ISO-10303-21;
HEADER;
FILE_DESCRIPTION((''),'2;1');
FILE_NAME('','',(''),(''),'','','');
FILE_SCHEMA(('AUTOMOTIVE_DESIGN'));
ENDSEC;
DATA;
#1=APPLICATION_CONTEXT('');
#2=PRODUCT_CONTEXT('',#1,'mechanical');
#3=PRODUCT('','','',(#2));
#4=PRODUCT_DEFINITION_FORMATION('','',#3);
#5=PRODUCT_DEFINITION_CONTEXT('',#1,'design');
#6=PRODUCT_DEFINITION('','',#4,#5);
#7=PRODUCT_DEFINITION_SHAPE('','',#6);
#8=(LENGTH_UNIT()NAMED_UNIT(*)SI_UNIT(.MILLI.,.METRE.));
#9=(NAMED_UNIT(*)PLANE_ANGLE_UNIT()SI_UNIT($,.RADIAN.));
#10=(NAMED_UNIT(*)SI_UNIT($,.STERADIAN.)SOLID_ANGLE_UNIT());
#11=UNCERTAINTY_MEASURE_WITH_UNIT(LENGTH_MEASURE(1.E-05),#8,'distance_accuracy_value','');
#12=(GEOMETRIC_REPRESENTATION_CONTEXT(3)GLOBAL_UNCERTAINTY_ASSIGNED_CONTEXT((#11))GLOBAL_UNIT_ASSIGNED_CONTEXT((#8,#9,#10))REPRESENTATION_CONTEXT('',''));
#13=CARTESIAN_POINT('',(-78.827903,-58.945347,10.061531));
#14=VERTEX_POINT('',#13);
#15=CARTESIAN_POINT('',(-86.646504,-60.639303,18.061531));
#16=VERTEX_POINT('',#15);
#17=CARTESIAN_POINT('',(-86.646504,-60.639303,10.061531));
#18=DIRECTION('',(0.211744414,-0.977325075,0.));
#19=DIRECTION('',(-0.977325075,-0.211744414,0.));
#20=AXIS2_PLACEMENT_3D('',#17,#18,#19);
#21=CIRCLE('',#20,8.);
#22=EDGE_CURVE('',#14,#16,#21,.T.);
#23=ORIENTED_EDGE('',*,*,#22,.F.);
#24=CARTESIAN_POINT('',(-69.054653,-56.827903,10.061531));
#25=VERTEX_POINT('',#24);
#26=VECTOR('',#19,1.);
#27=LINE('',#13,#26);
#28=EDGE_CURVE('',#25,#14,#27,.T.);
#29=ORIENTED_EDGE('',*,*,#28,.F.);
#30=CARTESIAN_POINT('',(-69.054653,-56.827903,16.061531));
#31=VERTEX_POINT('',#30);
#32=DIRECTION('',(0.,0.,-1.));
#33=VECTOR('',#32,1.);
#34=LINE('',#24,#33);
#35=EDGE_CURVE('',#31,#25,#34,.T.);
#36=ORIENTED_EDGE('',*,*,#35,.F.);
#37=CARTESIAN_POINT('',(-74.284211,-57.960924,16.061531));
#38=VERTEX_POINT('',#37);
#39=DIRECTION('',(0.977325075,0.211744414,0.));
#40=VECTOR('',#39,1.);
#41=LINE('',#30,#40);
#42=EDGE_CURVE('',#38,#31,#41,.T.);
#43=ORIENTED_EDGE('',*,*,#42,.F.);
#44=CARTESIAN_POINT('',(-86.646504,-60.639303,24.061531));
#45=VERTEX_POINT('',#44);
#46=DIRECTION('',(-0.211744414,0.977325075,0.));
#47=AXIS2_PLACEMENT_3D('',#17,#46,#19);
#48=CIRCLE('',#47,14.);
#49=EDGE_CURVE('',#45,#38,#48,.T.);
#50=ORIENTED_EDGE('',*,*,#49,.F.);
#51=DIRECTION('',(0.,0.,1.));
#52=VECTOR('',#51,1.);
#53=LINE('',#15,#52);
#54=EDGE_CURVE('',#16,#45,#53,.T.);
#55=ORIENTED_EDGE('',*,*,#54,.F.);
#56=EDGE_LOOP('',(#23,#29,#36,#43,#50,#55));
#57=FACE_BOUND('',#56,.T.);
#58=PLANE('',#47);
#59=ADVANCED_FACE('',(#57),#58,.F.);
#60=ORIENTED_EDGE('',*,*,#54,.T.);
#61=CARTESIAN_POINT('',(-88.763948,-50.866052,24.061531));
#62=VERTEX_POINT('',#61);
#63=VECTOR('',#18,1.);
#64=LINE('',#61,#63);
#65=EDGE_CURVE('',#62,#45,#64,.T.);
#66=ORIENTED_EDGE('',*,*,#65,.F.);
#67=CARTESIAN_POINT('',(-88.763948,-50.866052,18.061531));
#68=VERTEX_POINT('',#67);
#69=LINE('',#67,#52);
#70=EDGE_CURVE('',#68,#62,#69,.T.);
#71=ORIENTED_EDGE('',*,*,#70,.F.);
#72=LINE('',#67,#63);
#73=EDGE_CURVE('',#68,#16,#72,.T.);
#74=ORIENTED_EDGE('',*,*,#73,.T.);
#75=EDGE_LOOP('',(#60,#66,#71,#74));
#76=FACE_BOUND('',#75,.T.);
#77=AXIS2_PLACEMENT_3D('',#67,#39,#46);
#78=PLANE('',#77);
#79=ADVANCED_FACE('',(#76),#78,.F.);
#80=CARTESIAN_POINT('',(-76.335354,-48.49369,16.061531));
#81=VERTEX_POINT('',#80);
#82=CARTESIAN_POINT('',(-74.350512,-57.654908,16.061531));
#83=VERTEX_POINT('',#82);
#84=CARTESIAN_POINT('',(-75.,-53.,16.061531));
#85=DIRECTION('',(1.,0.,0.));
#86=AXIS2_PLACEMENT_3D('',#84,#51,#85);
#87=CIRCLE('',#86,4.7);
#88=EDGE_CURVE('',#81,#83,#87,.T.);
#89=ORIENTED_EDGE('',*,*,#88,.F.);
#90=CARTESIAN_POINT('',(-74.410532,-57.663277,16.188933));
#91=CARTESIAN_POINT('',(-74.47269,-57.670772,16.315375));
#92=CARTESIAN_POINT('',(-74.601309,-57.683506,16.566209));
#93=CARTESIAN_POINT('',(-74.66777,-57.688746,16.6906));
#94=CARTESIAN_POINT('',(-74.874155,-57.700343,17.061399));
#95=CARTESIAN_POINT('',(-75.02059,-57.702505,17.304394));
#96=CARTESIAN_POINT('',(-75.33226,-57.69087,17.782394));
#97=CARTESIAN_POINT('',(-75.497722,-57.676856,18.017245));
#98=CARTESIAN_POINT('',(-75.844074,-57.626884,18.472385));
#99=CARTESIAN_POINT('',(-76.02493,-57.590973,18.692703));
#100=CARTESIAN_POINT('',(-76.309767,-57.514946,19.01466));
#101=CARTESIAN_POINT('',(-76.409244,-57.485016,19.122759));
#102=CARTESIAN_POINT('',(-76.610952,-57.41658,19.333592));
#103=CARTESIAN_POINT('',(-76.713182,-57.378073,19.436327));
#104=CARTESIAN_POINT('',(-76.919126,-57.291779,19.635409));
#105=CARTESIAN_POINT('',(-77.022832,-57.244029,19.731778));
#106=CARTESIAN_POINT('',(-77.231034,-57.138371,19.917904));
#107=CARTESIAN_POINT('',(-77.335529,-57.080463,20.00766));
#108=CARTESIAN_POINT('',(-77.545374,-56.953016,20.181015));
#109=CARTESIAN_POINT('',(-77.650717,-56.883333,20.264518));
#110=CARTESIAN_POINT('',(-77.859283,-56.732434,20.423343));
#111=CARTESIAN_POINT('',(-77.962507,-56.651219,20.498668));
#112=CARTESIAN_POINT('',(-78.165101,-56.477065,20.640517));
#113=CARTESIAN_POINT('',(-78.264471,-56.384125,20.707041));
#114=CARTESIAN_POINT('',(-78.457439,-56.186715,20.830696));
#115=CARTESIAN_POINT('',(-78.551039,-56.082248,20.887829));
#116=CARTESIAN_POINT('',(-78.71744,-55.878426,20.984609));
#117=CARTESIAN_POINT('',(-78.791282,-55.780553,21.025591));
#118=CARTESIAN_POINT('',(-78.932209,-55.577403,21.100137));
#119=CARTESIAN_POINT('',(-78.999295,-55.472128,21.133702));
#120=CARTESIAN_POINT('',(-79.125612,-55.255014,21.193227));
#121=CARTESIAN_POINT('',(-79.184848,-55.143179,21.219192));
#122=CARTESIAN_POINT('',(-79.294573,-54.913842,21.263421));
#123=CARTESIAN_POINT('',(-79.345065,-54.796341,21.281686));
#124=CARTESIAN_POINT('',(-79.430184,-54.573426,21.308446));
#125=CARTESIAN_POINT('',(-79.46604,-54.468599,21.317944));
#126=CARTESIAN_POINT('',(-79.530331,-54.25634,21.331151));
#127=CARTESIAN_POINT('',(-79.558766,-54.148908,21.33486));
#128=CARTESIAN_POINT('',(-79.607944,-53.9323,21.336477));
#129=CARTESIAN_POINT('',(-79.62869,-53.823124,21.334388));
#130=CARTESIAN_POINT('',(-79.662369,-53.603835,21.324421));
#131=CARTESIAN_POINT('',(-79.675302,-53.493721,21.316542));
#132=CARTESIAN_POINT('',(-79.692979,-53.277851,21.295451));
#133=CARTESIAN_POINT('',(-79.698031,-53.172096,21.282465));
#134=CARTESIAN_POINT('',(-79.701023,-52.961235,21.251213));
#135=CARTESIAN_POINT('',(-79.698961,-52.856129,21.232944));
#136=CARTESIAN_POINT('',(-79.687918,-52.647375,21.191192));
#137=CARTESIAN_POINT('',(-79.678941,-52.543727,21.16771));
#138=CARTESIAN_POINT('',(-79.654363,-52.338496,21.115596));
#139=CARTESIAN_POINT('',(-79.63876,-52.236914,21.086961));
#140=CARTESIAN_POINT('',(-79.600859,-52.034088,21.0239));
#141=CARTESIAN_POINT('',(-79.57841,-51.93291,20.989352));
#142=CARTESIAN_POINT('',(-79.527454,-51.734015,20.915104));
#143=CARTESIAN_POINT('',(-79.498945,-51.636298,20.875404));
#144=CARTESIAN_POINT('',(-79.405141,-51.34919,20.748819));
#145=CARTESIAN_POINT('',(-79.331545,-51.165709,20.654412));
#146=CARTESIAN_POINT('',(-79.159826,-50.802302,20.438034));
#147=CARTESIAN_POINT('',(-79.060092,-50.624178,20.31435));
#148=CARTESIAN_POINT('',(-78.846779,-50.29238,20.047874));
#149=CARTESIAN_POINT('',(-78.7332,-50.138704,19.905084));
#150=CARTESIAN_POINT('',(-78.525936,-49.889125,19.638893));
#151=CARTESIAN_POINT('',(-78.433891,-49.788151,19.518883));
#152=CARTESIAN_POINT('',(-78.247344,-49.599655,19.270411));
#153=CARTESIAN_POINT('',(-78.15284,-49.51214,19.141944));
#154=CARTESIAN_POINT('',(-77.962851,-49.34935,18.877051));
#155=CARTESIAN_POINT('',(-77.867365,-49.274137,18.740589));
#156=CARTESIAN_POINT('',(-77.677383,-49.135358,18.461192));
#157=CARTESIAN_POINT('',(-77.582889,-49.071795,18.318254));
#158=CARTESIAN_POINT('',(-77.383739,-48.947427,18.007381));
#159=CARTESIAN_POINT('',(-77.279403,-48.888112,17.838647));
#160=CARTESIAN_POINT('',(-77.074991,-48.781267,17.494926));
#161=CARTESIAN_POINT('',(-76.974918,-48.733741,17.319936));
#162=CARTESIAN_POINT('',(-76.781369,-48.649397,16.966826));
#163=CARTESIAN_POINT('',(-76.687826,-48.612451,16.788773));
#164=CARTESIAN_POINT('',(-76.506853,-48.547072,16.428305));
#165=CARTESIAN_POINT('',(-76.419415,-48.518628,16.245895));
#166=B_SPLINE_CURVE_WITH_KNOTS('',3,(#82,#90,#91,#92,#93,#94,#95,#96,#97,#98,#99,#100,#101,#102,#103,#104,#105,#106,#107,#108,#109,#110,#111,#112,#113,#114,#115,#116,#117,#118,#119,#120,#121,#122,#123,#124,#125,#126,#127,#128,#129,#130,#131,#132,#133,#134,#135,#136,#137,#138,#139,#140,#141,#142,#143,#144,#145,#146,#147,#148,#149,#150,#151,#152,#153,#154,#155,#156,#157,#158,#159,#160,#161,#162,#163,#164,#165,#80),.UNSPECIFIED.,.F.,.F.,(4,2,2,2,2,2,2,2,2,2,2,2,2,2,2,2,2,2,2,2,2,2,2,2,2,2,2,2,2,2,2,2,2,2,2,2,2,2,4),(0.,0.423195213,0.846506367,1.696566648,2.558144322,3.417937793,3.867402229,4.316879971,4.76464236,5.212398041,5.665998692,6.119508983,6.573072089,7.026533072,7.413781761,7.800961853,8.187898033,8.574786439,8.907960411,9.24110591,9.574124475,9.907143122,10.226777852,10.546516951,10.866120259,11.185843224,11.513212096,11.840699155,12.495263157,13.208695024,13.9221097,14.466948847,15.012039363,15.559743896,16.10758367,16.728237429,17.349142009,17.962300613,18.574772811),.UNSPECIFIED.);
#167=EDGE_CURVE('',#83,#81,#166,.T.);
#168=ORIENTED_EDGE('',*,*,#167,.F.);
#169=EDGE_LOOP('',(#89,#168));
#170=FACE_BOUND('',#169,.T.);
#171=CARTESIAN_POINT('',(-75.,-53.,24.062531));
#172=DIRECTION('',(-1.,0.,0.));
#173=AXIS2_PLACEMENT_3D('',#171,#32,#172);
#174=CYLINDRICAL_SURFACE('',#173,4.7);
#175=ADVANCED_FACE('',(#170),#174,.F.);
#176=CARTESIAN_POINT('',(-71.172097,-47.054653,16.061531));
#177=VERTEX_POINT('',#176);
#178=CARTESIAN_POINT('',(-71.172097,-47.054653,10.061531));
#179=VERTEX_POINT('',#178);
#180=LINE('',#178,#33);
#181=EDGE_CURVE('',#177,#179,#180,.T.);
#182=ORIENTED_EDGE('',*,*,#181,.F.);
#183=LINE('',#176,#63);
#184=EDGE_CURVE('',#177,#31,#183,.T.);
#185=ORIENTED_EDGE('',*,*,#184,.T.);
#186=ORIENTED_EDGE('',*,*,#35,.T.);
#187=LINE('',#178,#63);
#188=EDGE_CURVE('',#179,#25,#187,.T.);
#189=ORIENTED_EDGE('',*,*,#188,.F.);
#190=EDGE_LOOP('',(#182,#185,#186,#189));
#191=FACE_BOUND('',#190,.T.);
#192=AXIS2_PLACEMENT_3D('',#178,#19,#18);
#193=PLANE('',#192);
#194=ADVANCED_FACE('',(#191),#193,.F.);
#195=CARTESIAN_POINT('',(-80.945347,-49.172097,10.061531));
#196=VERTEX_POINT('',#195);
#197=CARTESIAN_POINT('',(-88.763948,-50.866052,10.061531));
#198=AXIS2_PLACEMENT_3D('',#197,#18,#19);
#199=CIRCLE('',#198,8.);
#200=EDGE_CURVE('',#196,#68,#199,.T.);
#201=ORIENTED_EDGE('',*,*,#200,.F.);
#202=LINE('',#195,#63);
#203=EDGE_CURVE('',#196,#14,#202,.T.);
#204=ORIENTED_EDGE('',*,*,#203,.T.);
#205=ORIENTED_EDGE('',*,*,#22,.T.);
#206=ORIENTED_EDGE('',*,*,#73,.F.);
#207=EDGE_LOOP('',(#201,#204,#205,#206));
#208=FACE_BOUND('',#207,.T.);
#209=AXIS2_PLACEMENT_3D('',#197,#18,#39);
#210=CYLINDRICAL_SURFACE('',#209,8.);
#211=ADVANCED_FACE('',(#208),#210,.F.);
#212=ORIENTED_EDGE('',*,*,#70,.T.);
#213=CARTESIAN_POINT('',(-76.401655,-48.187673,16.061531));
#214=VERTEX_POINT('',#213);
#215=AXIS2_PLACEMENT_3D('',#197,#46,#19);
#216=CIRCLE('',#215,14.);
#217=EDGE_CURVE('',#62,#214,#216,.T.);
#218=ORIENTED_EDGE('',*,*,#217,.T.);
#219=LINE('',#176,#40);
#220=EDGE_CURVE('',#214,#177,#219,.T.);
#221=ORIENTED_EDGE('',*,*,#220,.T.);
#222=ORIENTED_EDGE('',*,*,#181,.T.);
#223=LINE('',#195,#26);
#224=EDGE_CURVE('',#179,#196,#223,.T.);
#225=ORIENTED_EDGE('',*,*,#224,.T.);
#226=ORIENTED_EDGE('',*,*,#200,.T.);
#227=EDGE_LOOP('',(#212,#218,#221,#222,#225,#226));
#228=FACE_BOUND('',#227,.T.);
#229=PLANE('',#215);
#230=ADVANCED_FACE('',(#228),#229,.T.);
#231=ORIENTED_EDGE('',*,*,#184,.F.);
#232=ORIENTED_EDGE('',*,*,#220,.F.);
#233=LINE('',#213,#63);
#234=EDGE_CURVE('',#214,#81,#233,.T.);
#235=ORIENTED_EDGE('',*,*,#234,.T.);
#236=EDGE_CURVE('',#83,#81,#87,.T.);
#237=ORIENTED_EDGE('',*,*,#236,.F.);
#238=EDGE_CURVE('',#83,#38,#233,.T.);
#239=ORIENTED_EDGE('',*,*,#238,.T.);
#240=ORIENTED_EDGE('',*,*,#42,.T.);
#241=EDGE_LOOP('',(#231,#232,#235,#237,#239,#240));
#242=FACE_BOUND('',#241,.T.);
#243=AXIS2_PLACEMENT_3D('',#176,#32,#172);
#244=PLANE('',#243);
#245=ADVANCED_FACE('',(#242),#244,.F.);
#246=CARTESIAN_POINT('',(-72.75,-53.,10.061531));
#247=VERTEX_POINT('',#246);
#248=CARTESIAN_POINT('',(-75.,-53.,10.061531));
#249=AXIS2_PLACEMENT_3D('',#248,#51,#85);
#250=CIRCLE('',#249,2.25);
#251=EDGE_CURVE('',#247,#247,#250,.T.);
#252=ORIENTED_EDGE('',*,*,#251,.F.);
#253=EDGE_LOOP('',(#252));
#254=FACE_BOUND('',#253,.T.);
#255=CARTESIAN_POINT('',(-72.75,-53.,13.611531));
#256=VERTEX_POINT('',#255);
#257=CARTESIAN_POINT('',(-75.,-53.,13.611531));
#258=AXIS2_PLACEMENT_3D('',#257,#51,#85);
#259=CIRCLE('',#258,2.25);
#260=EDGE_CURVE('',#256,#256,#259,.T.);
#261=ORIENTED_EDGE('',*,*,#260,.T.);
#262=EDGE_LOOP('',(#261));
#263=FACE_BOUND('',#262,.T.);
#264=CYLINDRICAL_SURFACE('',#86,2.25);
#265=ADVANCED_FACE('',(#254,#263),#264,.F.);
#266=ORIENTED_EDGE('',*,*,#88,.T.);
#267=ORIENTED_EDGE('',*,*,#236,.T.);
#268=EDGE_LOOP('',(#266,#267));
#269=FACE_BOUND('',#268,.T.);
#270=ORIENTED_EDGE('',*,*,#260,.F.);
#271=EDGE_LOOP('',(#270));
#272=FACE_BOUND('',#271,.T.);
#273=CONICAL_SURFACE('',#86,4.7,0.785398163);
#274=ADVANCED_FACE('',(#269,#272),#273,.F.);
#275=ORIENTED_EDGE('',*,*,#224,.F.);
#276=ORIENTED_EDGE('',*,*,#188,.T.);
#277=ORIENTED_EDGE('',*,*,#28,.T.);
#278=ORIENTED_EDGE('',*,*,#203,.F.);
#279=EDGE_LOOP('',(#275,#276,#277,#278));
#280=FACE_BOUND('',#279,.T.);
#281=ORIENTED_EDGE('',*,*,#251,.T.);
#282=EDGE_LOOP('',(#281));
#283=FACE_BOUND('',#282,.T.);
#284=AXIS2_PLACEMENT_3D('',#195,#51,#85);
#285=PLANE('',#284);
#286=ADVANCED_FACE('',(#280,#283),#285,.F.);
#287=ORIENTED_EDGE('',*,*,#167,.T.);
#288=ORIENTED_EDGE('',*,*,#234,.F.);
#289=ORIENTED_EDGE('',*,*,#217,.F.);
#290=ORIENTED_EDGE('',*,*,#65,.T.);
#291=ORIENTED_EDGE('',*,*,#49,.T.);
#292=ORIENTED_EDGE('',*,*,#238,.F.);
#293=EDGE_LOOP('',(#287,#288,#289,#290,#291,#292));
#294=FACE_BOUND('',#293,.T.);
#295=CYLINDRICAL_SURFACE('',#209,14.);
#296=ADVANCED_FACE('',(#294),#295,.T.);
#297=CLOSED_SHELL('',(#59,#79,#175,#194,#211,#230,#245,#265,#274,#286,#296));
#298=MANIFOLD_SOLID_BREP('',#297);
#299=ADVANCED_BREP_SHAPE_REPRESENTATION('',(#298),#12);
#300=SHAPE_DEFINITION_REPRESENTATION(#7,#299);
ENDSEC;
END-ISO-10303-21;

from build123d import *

# Parameters (mm, degrees)
EXTRUDE_1_DEPTH     = 5
CUT_EXTRUDE_1_REACH = 109.797
SKETCH_2_R          = 4.7


# Read off the part's stored shape, not the designer's step: 高级异型孔1
with BuildPart() as part:
    # 草图1 → 凸台-拉伸1 (new, symmetric)
    with BuildSketch(Plane(origin=(-126.798228997, -64.222453956, -29.938468974), x_dir=(0, 0, -1), z_dir=(-0.21174441426742976, 0.9773250754107066, 0))):
        with BuildLine():
            Line((-40, -48), (-40, -58))
            Line((-40, -58), (-46, -58))
            Line((-46, -58), (-46, -52.649110641))
            ThreePointArc((-46, -52.649110641), (-51.832159566, -47.483314774), (-54, -40))
            Line((-54, -40), (-48, -40))
            ThreePointArc((-48, -40), (-45.656854249, -45.656854249), (-40, -48))
        make_face()
    extrude(amount=EXTRUDE_1_DEPTH, both=True)

    # 高级异型孔1 outline → 高级异型孔1 (revolve, cut)
    with BuildSketch(Plane(origin=(-75, -53, 0), x_dir=(1, 0, 0), z_dir=(0, -1, 0))):
        Polygon((0, 10.061531026), (2.25, 10.061531026), (2.25, 13.611531026), (4.7, 16.061531026), (0, 16.061531026), align=None)
    revolve(axis=Axis((-75, -53, 0), (0, 0, 1)), mode=Mode.SUBTRACT)

    # 草图2 → 切除-拉伸1 (cut, up to next)
    with BuildSketch(Plane.XY.offset(16.061531026), mode=Mode.PRIVATE) as cut_extrude_1_sk1:
        with Locations((-75, -53)):
            Circle(SKETCH_2_R)
    cut_extrude_1_tool1 = extrude(cut_extrude_1_sk1.sketch, amount=CUT_EXTRUDE_1_REACH, mode=Mode.PRIVATE) & part.part
    add(cut_extrude_1_tool1.solids().sort_by_distance((-75, -53, 16.061531))[0], mode=Mode.SUBTRACT)


solid = part.part
